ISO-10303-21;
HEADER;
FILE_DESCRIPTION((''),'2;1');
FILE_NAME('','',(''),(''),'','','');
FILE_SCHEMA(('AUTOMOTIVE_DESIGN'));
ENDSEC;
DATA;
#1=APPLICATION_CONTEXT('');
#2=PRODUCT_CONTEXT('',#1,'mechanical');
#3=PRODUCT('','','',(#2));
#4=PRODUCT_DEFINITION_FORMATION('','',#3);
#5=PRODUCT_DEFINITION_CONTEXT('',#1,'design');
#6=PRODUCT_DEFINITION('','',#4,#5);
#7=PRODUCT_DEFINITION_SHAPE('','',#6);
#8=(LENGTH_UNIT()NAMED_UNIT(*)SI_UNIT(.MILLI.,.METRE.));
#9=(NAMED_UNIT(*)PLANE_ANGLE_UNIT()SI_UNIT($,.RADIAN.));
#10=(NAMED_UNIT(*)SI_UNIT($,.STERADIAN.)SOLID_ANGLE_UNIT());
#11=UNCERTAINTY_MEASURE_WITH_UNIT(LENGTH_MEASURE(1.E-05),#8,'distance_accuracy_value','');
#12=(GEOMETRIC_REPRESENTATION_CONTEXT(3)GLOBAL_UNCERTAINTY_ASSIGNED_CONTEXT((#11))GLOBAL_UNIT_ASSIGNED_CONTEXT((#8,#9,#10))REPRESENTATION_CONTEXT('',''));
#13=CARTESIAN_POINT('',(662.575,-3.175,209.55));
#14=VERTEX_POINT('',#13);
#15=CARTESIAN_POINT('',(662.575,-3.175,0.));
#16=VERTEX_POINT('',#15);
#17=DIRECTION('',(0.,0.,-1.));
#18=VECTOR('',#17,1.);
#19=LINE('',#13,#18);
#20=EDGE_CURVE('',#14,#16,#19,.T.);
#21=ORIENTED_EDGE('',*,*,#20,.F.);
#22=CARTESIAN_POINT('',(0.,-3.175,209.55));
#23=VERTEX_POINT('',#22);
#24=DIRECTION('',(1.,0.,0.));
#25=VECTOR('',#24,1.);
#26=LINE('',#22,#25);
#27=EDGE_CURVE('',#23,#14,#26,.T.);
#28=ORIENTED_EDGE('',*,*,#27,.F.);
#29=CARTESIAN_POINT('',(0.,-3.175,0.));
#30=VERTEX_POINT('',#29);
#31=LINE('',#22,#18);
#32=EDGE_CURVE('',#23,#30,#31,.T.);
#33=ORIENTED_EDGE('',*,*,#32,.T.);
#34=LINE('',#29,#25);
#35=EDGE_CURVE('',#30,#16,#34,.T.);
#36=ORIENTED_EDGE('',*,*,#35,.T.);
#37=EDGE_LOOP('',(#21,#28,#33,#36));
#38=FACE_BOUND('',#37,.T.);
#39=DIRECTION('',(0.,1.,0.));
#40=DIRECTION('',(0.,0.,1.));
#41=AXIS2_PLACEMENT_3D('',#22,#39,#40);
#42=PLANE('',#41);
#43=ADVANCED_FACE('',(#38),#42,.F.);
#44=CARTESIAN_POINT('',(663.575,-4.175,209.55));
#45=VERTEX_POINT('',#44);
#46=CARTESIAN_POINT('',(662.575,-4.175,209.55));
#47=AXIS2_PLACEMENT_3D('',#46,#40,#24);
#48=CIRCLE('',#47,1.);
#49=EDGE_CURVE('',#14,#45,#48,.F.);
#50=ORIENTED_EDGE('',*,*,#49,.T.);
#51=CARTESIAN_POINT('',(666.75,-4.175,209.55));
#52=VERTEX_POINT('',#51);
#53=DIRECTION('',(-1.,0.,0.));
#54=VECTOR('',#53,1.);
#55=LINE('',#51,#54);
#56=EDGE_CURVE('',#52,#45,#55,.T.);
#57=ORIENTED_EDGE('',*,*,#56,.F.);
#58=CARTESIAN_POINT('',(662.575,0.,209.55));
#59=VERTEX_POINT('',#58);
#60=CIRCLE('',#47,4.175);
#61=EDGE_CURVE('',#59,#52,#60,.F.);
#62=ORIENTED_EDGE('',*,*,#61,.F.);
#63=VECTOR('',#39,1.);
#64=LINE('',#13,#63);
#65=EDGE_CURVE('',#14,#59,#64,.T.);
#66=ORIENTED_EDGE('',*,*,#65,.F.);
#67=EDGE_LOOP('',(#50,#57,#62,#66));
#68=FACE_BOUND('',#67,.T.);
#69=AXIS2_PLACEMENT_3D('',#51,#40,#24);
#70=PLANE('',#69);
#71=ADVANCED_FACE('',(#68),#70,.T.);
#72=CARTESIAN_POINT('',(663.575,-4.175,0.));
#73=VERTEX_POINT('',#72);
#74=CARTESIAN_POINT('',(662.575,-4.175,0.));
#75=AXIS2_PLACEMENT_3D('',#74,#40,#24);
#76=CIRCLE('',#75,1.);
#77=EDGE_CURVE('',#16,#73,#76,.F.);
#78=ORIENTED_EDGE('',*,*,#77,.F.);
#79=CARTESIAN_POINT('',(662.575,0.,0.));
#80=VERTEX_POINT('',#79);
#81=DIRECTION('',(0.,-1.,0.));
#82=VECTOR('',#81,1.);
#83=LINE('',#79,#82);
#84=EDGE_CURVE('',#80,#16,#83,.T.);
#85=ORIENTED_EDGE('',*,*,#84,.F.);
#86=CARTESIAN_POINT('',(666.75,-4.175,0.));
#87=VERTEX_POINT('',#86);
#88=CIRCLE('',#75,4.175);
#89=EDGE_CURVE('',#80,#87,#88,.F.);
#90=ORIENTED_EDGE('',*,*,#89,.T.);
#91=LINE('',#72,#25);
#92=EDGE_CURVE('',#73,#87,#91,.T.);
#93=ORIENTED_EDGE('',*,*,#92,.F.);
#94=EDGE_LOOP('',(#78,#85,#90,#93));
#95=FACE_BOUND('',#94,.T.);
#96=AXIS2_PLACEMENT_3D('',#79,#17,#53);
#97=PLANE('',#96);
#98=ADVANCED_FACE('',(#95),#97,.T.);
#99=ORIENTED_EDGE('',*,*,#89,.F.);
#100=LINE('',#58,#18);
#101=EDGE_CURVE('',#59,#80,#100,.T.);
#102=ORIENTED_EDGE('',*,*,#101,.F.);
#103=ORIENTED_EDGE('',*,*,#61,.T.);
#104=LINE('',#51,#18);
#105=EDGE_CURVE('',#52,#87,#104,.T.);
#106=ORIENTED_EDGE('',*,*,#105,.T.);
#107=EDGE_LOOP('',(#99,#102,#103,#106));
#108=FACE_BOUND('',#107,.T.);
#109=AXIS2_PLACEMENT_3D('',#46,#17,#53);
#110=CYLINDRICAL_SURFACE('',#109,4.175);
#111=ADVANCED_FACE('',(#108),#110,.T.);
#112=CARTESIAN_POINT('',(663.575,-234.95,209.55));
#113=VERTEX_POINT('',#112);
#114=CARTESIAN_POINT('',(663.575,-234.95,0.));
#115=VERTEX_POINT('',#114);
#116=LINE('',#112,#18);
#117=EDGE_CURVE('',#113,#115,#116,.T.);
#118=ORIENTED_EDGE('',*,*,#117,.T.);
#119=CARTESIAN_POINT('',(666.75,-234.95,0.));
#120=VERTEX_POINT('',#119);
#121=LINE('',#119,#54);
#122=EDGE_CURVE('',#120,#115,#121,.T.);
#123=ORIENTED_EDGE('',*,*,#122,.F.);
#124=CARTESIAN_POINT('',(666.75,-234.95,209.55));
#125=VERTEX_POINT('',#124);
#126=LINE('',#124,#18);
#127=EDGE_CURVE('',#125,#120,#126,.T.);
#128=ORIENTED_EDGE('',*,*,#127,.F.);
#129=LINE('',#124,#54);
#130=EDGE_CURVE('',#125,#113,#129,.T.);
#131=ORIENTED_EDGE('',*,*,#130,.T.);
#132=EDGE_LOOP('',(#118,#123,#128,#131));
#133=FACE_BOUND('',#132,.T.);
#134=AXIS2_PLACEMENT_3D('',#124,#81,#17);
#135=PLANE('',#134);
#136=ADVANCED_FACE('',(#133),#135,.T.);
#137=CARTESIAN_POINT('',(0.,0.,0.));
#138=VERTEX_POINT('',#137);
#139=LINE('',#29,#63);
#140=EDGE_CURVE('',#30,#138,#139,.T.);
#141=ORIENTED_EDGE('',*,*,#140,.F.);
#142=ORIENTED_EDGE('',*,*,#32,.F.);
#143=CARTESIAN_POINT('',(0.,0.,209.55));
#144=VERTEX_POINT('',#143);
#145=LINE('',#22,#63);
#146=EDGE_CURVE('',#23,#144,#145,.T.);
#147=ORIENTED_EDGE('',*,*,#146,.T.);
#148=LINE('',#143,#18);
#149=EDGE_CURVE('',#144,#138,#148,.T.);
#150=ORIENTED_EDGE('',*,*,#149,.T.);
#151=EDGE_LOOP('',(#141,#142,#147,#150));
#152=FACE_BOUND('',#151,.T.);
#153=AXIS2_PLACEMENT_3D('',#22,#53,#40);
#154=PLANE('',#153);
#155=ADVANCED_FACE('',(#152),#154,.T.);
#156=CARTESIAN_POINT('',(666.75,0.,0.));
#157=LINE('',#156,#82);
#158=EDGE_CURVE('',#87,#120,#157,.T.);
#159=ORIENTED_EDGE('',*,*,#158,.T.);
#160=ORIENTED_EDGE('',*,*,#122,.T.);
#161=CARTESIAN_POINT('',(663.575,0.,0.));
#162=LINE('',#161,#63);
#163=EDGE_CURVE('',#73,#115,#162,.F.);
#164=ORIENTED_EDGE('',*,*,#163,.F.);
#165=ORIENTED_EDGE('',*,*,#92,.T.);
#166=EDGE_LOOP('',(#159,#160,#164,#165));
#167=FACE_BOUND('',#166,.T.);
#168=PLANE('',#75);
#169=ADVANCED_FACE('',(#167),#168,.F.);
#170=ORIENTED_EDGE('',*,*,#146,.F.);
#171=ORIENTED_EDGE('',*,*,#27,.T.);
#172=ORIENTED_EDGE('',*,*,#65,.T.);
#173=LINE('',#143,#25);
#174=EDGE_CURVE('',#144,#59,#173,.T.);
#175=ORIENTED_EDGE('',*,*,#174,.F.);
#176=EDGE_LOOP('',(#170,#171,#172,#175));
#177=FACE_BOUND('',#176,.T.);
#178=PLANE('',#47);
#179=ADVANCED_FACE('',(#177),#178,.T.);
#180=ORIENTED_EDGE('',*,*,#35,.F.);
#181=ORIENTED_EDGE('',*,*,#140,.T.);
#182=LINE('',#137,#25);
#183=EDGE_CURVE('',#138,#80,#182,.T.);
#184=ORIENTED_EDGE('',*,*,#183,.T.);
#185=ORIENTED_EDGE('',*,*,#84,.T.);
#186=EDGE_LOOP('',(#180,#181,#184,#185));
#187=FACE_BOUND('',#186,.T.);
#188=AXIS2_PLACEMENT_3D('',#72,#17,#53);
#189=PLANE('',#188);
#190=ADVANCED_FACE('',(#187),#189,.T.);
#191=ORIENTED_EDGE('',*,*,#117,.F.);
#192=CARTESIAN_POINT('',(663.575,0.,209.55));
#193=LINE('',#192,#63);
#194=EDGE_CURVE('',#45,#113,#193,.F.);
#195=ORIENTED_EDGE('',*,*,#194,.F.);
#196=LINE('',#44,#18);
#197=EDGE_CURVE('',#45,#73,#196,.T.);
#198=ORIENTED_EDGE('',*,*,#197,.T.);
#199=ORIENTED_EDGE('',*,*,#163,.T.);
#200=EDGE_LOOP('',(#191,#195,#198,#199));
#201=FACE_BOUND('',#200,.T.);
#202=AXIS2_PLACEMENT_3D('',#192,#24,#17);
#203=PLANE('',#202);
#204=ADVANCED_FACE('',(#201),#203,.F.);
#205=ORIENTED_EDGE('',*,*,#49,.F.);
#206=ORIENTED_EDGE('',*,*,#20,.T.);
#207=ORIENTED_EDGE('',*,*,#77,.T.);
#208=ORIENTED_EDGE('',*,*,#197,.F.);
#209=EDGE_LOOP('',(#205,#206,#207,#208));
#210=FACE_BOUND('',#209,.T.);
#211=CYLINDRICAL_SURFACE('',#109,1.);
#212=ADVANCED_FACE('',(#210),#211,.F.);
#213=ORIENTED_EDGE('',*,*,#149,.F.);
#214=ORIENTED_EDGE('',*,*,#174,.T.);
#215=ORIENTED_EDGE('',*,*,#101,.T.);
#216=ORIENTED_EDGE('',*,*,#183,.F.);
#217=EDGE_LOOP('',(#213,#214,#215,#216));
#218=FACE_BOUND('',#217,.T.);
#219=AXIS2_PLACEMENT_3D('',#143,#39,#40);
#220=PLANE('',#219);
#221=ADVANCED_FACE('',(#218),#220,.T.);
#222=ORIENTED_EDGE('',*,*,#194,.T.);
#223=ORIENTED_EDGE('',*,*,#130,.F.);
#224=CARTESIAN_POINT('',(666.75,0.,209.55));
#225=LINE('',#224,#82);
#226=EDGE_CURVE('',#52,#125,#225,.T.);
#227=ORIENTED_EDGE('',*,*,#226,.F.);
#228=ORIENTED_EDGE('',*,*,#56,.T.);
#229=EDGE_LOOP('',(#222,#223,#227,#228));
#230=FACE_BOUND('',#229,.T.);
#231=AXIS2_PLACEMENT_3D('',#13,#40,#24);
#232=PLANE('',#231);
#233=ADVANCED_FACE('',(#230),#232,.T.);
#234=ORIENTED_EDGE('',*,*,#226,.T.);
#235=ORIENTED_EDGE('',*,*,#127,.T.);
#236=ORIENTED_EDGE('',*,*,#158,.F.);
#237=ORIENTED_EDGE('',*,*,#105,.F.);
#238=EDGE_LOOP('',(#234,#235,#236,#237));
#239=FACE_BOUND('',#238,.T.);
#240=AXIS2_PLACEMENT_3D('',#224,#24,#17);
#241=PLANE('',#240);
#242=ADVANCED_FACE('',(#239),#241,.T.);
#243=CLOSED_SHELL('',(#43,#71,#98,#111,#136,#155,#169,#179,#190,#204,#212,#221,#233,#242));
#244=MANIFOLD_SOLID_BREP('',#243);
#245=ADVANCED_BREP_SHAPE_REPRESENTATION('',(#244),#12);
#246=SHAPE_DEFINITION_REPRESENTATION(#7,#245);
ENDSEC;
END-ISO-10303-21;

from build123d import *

# Parameters (mm, degrees)
BASE_FLANGE1_DEPTH = 209.55


# Sheet-metal steps are written as plain solids
with BuildPart() as part:
    # Sketch1 → Base-Flange1 (new body)
    with BuildSketch(Plane.XY):
        with BuildLine():
            Line((0, 0), (662.575, 0))
            ThreePointArc((662.575, 0), (665.527170811, -1.222829189), (666.75, -4.175))
            Line((666.75, -4.175), (666.75, -234.95))
            Line((666.75, -234.95), (663.575, -234.95))
            Line((663.575, -234.95), (663.575, -4.175))
            ThreePointArc((663.575, -4.175), (663.282106781, -3.467893219), (662.575, -3.175))
            Line((662.575, -3.175), (0, -3.175))
            Line((0, -3.175), (0, 0))
        make_face()
    extrude(amount=BASE_FLANGE1_DEPTH)


solid = part.part
